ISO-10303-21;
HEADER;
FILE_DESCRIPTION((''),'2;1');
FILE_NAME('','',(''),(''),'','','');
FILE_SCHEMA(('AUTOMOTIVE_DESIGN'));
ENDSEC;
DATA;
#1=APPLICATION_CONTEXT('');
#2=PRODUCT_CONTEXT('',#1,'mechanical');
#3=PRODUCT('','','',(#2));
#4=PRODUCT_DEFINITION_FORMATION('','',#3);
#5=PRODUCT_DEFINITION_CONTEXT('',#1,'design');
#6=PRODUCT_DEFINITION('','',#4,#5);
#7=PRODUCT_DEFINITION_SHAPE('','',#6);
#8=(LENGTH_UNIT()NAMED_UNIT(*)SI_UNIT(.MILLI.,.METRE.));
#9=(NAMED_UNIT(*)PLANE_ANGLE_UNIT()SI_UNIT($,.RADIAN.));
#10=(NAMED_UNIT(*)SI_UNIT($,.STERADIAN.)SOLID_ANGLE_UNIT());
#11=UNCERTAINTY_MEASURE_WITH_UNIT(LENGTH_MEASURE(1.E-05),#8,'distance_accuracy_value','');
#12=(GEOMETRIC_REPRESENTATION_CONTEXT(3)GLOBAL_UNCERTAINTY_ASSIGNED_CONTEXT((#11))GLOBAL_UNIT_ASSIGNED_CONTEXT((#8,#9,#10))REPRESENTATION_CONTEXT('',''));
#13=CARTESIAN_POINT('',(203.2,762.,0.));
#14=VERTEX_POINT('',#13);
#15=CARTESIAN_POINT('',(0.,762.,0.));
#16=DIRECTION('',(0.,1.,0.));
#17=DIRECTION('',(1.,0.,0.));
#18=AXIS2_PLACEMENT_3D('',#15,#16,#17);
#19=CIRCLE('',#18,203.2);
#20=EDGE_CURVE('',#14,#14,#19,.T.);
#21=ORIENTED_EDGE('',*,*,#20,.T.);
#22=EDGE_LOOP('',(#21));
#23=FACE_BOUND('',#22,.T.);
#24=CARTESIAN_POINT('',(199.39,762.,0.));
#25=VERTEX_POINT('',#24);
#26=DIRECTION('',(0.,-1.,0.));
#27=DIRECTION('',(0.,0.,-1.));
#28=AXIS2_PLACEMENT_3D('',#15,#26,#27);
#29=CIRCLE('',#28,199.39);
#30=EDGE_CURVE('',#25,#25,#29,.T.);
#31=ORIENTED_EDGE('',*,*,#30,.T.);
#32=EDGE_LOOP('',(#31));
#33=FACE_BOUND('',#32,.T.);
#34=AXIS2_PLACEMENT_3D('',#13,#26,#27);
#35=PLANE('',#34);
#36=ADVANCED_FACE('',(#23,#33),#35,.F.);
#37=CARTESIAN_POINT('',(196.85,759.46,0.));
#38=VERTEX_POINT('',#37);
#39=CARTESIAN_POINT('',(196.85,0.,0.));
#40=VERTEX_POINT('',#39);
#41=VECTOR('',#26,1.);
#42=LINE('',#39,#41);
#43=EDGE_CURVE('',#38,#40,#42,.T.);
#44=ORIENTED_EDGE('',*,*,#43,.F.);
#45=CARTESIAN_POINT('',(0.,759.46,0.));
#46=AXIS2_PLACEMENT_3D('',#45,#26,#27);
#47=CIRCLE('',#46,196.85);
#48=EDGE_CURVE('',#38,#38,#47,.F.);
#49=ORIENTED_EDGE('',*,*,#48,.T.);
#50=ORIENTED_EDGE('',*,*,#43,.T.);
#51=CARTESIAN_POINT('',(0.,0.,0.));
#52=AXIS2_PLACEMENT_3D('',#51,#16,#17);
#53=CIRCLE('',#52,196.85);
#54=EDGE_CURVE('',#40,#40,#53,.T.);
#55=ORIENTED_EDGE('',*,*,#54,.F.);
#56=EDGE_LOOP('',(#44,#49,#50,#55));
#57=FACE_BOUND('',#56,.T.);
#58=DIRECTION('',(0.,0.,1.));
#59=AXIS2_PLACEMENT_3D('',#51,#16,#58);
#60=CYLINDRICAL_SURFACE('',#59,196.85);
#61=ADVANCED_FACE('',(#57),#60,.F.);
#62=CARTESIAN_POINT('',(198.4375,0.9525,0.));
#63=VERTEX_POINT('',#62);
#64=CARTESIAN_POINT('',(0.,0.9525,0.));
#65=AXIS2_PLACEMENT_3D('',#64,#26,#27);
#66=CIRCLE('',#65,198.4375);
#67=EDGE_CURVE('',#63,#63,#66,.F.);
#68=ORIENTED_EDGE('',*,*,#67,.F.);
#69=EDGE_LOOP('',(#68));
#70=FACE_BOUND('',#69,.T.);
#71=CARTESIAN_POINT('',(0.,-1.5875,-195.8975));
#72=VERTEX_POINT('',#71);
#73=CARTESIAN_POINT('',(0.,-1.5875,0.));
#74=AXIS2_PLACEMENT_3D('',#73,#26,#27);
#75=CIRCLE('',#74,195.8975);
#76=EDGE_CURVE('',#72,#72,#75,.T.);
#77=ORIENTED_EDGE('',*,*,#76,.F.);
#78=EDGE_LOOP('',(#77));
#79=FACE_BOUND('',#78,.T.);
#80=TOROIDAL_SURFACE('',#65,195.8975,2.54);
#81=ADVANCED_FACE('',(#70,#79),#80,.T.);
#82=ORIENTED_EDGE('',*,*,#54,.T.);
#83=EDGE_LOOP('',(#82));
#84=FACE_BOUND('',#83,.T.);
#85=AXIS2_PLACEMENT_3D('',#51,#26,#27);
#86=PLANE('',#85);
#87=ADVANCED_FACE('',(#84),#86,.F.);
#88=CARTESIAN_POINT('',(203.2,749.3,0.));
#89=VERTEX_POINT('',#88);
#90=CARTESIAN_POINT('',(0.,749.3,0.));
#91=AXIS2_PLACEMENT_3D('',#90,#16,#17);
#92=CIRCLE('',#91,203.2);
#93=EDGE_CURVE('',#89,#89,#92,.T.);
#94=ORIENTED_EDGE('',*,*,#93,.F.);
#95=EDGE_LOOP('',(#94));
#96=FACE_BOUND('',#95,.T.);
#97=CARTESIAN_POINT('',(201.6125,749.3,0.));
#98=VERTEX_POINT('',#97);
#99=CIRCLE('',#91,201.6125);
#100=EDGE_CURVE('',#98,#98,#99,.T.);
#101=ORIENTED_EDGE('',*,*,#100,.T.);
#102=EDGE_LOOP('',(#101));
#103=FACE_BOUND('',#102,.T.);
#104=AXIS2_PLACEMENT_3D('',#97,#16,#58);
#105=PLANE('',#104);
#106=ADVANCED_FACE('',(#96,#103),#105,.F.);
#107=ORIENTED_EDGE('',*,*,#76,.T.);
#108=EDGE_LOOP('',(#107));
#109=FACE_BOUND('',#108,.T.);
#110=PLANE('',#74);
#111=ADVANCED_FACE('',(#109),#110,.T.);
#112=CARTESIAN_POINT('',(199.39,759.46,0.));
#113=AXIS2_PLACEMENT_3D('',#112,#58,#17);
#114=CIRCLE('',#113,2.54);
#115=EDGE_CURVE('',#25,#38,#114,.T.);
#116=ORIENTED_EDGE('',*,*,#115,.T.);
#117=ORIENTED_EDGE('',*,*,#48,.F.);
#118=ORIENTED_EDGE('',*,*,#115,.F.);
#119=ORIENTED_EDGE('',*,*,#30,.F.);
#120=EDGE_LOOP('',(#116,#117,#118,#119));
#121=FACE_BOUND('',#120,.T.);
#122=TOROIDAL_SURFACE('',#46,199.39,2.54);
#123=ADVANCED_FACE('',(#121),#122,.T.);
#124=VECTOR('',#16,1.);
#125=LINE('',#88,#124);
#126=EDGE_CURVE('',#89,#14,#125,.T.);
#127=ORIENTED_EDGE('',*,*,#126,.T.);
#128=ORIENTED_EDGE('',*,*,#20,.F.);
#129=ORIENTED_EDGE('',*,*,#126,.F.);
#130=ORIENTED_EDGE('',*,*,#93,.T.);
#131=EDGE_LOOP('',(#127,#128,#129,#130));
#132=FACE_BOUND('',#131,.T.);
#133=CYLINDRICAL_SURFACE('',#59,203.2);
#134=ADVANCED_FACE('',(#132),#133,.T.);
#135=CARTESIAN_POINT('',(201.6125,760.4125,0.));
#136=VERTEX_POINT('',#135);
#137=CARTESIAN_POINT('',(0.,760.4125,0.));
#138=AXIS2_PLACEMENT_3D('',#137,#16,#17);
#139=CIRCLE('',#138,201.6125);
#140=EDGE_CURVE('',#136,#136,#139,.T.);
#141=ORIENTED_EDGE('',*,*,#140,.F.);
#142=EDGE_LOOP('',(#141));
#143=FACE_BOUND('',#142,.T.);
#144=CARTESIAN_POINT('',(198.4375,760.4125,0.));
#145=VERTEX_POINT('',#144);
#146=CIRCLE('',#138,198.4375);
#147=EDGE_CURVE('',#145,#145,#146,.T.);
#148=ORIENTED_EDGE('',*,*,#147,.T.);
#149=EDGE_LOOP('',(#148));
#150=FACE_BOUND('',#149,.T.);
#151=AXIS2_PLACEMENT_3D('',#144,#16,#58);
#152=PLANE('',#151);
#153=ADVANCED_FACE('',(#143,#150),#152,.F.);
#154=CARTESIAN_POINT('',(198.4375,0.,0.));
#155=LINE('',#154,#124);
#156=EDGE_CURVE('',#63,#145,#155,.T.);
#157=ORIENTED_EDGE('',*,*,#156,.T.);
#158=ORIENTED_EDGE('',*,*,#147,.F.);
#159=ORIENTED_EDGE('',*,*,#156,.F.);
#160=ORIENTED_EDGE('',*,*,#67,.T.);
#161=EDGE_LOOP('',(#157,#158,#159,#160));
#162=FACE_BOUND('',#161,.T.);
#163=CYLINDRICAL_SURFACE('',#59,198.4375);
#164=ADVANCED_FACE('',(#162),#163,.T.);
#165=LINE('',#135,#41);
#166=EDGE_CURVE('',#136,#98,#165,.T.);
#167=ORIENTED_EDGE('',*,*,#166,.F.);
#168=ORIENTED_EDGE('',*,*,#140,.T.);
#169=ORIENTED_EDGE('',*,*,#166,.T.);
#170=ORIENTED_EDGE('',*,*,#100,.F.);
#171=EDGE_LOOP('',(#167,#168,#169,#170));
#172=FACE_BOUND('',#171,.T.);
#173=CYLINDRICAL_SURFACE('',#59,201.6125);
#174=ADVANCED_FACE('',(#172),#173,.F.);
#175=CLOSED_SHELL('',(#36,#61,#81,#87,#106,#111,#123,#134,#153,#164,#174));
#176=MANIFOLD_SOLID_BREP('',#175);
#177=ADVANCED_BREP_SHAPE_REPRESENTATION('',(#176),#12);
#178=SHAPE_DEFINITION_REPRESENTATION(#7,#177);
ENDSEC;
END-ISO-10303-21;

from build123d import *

# Parameters (mm, degrees)
SKETCH3_R           = 198.4375
BOSS_EXTRUDE1_DEPTH = 1.5875
FILLET1_R           = 2.54


with BuildPart() as part:
    # Sweep1: sweep along a path in Sketch1
    with BuildLine(Plane(origin=(0, 0, 0), x_dir=(1, 0, 0), z_dir=(0, 1, 0))) as sweep1_path:
        CenterArc((0, 0), 196.85, 0, 360)
    # Sketch2 → Sweep1 (sweep)
    with BuildSketch(Plane.XY):
        Polygon((196.85, 0), (196.85, 762), (203.2, 762), (203.2, 749.3), (201.6125, 749.3), (201.6125, 760.4125), (198.4375, 760.4125), (198.4375, 0), align=None)
    sweep(path=sweep1_path.line)

    # Sketch3 → Boss-Extrude1 (add)
    with BuildSketch(Plane(origin=(0, 0, 0), x_dir=(-1, 0, 0), z_dir=(0, -1, 0))):
        Circle(SKETCH3_R)
    extrude(amount=BOSS_EXTRUDE1_DEPTH)

    # Fillet1
    fillet1_edges = [part.edges().sort_by_distance(p)[0] for p in [
        (198.4375, -1.5875, 0),
        (-196.85, 762, 0),
    ]]
    fillet(fillet1_edges, radius=FILLET1_R)


solid = part.part
